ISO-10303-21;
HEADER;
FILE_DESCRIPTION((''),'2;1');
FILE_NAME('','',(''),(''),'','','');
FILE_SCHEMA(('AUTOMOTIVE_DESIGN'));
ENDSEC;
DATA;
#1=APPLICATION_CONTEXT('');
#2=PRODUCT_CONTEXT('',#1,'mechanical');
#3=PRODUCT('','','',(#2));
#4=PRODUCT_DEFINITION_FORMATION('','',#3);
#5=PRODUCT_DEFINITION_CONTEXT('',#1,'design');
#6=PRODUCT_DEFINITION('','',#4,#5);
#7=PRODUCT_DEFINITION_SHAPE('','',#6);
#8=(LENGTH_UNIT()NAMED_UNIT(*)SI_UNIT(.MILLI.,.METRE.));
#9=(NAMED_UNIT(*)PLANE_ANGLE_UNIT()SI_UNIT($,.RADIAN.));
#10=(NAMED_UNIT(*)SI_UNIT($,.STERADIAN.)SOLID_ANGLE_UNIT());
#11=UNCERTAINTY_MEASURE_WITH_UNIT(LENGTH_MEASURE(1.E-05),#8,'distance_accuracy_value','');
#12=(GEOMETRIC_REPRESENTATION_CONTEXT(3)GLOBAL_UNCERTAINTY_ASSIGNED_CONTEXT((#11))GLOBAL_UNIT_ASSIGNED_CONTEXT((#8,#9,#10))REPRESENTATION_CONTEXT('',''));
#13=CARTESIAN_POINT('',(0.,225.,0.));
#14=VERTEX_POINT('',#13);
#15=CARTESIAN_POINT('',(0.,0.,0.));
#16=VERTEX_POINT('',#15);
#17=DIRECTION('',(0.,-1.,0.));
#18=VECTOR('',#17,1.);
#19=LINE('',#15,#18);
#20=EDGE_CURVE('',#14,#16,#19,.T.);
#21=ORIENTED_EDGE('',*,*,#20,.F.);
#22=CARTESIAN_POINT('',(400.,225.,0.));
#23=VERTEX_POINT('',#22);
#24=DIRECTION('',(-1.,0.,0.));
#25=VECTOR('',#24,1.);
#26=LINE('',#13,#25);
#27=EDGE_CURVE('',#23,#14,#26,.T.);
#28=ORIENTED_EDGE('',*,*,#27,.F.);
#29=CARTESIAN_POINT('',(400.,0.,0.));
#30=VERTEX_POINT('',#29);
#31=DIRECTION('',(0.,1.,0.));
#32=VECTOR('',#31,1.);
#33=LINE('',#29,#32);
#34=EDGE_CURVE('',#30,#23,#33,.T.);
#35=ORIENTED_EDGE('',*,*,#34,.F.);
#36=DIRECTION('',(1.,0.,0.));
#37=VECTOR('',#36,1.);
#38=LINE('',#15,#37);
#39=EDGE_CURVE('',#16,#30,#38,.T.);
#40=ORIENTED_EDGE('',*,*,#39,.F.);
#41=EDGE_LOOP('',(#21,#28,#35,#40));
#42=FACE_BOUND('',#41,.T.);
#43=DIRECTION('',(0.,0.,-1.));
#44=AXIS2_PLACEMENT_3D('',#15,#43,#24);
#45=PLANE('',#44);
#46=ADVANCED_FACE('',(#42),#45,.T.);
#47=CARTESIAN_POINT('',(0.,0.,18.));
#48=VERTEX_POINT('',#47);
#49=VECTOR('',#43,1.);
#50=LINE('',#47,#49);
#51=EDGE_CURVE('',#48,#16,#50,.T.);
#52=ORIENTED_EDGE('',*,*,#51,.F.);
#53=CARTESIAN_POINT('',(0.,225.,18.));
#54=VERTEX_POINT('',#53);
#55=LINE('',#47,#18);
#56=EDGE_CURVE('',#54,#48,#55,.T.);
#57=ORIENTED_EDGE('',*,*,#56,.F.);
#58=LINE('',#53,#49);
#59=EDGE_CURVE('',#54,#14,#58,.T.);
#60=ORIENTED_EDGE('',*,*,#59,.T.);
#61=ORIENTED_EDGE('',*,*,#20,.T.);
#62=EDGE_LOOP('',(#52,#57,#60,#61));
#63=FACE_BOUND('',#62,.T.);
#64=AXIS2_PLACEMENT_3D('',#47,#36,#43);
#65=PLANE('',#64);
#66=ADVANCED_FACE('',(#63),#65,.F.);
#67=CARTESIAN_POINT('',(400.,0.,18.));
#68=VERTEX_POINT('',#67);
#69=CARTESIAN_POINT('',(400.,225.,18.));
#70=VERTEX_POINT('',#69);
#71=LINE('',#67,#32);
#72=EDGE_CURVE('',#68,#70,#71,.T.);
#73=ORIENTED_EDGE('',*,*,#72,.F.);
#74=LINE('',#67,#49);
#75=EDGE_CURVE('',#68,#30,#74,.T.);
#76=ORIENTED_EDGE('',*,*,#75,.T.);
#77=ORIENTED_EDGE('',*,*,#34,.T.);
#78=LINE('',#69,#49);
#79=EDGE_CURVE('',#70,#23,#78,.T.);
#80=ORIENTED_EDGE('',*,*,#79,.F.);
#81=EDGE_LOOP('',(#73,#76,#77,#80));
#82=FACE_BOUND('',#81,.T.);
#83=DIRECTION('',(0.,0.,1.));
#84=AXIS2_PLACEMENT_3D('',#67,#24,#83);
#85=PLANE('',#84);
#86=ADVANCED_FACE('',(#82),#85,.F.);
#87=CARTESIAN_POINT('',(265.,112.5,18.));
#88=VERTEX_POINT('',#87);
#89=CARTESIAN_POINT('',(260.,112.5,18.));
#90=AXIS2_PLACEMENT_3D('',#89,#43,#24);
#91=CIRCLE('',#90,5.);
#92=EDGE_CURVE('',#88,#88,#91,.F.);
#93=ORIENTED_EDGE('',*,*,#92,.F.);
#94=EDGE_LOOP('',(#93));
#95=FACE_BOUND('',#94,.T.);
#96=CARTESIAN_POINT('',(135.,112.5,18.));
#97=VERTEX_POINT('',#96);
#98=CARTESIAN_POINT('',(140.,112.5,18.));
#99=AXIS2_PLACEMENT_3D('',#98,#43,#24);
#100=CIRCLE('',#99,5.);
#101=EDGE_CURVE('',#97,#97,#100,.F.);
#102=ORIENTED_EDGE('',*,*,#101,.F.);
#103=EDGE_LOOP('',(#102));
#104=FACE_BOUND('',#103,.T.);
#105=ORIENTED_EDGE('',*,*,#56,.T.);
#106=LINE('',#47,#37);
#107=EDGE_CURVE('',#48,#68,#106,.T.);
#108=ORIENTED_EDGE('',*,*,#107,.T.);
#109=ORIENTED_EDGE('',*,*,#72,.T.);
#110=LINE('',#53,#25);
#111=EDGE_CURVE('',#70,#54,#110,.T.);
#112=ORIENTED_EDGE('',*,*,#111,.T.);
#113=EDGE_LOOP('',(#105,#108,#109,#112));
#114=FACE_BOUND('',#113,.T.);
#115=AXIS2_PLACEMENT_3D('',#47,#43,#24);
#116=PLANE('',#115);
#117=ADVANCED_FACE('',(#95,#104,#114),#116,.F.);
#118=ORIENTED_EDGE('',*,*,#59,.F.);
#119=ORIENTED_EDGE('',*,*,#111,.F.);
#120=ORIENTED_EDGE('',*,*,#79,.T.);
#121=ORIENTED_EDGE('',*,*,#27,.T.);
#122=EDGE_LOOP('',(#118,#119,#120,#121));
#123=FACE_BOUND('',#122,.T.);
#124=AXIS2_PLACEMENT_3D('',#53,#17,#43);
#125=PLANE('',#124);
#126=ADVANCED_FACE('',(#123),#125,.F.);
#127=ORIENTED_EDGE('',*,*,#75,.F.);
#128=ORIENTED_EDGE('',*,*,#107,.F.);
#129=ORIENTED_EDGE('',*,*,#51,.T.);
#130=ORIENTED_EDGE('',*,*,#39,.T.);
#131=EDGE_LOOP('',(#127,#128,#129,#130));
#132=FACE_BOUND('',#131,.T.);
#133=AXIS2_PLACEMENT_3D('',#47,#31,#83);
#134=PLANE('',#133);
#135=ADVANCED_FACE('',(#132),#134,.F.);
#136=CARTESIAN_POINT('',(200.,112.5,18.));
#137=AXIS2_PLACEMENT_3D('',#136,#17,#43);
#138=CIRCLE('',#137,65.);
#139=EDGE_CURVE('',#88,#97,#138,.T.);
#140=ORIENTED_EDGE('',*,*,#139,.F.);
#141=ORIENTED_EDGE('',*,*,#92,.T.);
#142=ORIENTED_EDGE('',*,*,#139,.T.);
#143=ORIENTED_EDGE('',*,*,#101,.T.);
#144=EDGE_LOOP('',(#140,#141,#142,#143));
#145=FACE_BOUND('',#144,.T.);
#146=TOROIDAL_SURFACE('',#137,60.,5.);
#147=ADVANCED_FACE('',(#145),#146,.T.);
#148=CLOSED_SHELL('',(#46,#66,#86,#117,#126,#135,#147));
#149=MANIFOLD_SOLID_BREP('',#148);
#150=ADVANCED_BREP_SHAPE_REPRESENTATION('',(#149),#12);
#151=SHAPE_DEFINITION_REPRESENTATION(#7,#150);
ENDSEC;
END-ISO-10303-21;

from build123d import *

# Parameters (mm, degrees)
SKETCH1_W           = 400
SKETCH1_H           = 225
BOSS_EXTRUDE1_DEPTH = 18
SWEEP1_OUTLINE_R    = 5
SWEEP1_ANGLE        = 180


# Read off the part's stored shape, not the designer's step: Sweep1
with BuildPart() as part:
    # Sketch1 → Boss-Extrude1 (new body)
    with BuildSketch(Plane.XY):
        with Locations((200, 112.5)):
            Rectangle(SKETCH1_W, SKETCH1_H)
    extrude(amount=BOSS_EXTRUDE1_DEPTH)

    # Sweep1 outline → Sweep1 (revolve)
    with BuildSketch(Plane(origin=(200, 0, 18), x_dir=(-1, 0, 0), z_dir=(0, 0, -1))):
        with Locations((60, 112.5)):
            Circle(SWEEP1_OUTLINE_R)
    revolve(axis=Axis((200, 0, 18), (0, 1, 0)), revolution_arc=SWEEP1_ANGLE)


solid = part.part
